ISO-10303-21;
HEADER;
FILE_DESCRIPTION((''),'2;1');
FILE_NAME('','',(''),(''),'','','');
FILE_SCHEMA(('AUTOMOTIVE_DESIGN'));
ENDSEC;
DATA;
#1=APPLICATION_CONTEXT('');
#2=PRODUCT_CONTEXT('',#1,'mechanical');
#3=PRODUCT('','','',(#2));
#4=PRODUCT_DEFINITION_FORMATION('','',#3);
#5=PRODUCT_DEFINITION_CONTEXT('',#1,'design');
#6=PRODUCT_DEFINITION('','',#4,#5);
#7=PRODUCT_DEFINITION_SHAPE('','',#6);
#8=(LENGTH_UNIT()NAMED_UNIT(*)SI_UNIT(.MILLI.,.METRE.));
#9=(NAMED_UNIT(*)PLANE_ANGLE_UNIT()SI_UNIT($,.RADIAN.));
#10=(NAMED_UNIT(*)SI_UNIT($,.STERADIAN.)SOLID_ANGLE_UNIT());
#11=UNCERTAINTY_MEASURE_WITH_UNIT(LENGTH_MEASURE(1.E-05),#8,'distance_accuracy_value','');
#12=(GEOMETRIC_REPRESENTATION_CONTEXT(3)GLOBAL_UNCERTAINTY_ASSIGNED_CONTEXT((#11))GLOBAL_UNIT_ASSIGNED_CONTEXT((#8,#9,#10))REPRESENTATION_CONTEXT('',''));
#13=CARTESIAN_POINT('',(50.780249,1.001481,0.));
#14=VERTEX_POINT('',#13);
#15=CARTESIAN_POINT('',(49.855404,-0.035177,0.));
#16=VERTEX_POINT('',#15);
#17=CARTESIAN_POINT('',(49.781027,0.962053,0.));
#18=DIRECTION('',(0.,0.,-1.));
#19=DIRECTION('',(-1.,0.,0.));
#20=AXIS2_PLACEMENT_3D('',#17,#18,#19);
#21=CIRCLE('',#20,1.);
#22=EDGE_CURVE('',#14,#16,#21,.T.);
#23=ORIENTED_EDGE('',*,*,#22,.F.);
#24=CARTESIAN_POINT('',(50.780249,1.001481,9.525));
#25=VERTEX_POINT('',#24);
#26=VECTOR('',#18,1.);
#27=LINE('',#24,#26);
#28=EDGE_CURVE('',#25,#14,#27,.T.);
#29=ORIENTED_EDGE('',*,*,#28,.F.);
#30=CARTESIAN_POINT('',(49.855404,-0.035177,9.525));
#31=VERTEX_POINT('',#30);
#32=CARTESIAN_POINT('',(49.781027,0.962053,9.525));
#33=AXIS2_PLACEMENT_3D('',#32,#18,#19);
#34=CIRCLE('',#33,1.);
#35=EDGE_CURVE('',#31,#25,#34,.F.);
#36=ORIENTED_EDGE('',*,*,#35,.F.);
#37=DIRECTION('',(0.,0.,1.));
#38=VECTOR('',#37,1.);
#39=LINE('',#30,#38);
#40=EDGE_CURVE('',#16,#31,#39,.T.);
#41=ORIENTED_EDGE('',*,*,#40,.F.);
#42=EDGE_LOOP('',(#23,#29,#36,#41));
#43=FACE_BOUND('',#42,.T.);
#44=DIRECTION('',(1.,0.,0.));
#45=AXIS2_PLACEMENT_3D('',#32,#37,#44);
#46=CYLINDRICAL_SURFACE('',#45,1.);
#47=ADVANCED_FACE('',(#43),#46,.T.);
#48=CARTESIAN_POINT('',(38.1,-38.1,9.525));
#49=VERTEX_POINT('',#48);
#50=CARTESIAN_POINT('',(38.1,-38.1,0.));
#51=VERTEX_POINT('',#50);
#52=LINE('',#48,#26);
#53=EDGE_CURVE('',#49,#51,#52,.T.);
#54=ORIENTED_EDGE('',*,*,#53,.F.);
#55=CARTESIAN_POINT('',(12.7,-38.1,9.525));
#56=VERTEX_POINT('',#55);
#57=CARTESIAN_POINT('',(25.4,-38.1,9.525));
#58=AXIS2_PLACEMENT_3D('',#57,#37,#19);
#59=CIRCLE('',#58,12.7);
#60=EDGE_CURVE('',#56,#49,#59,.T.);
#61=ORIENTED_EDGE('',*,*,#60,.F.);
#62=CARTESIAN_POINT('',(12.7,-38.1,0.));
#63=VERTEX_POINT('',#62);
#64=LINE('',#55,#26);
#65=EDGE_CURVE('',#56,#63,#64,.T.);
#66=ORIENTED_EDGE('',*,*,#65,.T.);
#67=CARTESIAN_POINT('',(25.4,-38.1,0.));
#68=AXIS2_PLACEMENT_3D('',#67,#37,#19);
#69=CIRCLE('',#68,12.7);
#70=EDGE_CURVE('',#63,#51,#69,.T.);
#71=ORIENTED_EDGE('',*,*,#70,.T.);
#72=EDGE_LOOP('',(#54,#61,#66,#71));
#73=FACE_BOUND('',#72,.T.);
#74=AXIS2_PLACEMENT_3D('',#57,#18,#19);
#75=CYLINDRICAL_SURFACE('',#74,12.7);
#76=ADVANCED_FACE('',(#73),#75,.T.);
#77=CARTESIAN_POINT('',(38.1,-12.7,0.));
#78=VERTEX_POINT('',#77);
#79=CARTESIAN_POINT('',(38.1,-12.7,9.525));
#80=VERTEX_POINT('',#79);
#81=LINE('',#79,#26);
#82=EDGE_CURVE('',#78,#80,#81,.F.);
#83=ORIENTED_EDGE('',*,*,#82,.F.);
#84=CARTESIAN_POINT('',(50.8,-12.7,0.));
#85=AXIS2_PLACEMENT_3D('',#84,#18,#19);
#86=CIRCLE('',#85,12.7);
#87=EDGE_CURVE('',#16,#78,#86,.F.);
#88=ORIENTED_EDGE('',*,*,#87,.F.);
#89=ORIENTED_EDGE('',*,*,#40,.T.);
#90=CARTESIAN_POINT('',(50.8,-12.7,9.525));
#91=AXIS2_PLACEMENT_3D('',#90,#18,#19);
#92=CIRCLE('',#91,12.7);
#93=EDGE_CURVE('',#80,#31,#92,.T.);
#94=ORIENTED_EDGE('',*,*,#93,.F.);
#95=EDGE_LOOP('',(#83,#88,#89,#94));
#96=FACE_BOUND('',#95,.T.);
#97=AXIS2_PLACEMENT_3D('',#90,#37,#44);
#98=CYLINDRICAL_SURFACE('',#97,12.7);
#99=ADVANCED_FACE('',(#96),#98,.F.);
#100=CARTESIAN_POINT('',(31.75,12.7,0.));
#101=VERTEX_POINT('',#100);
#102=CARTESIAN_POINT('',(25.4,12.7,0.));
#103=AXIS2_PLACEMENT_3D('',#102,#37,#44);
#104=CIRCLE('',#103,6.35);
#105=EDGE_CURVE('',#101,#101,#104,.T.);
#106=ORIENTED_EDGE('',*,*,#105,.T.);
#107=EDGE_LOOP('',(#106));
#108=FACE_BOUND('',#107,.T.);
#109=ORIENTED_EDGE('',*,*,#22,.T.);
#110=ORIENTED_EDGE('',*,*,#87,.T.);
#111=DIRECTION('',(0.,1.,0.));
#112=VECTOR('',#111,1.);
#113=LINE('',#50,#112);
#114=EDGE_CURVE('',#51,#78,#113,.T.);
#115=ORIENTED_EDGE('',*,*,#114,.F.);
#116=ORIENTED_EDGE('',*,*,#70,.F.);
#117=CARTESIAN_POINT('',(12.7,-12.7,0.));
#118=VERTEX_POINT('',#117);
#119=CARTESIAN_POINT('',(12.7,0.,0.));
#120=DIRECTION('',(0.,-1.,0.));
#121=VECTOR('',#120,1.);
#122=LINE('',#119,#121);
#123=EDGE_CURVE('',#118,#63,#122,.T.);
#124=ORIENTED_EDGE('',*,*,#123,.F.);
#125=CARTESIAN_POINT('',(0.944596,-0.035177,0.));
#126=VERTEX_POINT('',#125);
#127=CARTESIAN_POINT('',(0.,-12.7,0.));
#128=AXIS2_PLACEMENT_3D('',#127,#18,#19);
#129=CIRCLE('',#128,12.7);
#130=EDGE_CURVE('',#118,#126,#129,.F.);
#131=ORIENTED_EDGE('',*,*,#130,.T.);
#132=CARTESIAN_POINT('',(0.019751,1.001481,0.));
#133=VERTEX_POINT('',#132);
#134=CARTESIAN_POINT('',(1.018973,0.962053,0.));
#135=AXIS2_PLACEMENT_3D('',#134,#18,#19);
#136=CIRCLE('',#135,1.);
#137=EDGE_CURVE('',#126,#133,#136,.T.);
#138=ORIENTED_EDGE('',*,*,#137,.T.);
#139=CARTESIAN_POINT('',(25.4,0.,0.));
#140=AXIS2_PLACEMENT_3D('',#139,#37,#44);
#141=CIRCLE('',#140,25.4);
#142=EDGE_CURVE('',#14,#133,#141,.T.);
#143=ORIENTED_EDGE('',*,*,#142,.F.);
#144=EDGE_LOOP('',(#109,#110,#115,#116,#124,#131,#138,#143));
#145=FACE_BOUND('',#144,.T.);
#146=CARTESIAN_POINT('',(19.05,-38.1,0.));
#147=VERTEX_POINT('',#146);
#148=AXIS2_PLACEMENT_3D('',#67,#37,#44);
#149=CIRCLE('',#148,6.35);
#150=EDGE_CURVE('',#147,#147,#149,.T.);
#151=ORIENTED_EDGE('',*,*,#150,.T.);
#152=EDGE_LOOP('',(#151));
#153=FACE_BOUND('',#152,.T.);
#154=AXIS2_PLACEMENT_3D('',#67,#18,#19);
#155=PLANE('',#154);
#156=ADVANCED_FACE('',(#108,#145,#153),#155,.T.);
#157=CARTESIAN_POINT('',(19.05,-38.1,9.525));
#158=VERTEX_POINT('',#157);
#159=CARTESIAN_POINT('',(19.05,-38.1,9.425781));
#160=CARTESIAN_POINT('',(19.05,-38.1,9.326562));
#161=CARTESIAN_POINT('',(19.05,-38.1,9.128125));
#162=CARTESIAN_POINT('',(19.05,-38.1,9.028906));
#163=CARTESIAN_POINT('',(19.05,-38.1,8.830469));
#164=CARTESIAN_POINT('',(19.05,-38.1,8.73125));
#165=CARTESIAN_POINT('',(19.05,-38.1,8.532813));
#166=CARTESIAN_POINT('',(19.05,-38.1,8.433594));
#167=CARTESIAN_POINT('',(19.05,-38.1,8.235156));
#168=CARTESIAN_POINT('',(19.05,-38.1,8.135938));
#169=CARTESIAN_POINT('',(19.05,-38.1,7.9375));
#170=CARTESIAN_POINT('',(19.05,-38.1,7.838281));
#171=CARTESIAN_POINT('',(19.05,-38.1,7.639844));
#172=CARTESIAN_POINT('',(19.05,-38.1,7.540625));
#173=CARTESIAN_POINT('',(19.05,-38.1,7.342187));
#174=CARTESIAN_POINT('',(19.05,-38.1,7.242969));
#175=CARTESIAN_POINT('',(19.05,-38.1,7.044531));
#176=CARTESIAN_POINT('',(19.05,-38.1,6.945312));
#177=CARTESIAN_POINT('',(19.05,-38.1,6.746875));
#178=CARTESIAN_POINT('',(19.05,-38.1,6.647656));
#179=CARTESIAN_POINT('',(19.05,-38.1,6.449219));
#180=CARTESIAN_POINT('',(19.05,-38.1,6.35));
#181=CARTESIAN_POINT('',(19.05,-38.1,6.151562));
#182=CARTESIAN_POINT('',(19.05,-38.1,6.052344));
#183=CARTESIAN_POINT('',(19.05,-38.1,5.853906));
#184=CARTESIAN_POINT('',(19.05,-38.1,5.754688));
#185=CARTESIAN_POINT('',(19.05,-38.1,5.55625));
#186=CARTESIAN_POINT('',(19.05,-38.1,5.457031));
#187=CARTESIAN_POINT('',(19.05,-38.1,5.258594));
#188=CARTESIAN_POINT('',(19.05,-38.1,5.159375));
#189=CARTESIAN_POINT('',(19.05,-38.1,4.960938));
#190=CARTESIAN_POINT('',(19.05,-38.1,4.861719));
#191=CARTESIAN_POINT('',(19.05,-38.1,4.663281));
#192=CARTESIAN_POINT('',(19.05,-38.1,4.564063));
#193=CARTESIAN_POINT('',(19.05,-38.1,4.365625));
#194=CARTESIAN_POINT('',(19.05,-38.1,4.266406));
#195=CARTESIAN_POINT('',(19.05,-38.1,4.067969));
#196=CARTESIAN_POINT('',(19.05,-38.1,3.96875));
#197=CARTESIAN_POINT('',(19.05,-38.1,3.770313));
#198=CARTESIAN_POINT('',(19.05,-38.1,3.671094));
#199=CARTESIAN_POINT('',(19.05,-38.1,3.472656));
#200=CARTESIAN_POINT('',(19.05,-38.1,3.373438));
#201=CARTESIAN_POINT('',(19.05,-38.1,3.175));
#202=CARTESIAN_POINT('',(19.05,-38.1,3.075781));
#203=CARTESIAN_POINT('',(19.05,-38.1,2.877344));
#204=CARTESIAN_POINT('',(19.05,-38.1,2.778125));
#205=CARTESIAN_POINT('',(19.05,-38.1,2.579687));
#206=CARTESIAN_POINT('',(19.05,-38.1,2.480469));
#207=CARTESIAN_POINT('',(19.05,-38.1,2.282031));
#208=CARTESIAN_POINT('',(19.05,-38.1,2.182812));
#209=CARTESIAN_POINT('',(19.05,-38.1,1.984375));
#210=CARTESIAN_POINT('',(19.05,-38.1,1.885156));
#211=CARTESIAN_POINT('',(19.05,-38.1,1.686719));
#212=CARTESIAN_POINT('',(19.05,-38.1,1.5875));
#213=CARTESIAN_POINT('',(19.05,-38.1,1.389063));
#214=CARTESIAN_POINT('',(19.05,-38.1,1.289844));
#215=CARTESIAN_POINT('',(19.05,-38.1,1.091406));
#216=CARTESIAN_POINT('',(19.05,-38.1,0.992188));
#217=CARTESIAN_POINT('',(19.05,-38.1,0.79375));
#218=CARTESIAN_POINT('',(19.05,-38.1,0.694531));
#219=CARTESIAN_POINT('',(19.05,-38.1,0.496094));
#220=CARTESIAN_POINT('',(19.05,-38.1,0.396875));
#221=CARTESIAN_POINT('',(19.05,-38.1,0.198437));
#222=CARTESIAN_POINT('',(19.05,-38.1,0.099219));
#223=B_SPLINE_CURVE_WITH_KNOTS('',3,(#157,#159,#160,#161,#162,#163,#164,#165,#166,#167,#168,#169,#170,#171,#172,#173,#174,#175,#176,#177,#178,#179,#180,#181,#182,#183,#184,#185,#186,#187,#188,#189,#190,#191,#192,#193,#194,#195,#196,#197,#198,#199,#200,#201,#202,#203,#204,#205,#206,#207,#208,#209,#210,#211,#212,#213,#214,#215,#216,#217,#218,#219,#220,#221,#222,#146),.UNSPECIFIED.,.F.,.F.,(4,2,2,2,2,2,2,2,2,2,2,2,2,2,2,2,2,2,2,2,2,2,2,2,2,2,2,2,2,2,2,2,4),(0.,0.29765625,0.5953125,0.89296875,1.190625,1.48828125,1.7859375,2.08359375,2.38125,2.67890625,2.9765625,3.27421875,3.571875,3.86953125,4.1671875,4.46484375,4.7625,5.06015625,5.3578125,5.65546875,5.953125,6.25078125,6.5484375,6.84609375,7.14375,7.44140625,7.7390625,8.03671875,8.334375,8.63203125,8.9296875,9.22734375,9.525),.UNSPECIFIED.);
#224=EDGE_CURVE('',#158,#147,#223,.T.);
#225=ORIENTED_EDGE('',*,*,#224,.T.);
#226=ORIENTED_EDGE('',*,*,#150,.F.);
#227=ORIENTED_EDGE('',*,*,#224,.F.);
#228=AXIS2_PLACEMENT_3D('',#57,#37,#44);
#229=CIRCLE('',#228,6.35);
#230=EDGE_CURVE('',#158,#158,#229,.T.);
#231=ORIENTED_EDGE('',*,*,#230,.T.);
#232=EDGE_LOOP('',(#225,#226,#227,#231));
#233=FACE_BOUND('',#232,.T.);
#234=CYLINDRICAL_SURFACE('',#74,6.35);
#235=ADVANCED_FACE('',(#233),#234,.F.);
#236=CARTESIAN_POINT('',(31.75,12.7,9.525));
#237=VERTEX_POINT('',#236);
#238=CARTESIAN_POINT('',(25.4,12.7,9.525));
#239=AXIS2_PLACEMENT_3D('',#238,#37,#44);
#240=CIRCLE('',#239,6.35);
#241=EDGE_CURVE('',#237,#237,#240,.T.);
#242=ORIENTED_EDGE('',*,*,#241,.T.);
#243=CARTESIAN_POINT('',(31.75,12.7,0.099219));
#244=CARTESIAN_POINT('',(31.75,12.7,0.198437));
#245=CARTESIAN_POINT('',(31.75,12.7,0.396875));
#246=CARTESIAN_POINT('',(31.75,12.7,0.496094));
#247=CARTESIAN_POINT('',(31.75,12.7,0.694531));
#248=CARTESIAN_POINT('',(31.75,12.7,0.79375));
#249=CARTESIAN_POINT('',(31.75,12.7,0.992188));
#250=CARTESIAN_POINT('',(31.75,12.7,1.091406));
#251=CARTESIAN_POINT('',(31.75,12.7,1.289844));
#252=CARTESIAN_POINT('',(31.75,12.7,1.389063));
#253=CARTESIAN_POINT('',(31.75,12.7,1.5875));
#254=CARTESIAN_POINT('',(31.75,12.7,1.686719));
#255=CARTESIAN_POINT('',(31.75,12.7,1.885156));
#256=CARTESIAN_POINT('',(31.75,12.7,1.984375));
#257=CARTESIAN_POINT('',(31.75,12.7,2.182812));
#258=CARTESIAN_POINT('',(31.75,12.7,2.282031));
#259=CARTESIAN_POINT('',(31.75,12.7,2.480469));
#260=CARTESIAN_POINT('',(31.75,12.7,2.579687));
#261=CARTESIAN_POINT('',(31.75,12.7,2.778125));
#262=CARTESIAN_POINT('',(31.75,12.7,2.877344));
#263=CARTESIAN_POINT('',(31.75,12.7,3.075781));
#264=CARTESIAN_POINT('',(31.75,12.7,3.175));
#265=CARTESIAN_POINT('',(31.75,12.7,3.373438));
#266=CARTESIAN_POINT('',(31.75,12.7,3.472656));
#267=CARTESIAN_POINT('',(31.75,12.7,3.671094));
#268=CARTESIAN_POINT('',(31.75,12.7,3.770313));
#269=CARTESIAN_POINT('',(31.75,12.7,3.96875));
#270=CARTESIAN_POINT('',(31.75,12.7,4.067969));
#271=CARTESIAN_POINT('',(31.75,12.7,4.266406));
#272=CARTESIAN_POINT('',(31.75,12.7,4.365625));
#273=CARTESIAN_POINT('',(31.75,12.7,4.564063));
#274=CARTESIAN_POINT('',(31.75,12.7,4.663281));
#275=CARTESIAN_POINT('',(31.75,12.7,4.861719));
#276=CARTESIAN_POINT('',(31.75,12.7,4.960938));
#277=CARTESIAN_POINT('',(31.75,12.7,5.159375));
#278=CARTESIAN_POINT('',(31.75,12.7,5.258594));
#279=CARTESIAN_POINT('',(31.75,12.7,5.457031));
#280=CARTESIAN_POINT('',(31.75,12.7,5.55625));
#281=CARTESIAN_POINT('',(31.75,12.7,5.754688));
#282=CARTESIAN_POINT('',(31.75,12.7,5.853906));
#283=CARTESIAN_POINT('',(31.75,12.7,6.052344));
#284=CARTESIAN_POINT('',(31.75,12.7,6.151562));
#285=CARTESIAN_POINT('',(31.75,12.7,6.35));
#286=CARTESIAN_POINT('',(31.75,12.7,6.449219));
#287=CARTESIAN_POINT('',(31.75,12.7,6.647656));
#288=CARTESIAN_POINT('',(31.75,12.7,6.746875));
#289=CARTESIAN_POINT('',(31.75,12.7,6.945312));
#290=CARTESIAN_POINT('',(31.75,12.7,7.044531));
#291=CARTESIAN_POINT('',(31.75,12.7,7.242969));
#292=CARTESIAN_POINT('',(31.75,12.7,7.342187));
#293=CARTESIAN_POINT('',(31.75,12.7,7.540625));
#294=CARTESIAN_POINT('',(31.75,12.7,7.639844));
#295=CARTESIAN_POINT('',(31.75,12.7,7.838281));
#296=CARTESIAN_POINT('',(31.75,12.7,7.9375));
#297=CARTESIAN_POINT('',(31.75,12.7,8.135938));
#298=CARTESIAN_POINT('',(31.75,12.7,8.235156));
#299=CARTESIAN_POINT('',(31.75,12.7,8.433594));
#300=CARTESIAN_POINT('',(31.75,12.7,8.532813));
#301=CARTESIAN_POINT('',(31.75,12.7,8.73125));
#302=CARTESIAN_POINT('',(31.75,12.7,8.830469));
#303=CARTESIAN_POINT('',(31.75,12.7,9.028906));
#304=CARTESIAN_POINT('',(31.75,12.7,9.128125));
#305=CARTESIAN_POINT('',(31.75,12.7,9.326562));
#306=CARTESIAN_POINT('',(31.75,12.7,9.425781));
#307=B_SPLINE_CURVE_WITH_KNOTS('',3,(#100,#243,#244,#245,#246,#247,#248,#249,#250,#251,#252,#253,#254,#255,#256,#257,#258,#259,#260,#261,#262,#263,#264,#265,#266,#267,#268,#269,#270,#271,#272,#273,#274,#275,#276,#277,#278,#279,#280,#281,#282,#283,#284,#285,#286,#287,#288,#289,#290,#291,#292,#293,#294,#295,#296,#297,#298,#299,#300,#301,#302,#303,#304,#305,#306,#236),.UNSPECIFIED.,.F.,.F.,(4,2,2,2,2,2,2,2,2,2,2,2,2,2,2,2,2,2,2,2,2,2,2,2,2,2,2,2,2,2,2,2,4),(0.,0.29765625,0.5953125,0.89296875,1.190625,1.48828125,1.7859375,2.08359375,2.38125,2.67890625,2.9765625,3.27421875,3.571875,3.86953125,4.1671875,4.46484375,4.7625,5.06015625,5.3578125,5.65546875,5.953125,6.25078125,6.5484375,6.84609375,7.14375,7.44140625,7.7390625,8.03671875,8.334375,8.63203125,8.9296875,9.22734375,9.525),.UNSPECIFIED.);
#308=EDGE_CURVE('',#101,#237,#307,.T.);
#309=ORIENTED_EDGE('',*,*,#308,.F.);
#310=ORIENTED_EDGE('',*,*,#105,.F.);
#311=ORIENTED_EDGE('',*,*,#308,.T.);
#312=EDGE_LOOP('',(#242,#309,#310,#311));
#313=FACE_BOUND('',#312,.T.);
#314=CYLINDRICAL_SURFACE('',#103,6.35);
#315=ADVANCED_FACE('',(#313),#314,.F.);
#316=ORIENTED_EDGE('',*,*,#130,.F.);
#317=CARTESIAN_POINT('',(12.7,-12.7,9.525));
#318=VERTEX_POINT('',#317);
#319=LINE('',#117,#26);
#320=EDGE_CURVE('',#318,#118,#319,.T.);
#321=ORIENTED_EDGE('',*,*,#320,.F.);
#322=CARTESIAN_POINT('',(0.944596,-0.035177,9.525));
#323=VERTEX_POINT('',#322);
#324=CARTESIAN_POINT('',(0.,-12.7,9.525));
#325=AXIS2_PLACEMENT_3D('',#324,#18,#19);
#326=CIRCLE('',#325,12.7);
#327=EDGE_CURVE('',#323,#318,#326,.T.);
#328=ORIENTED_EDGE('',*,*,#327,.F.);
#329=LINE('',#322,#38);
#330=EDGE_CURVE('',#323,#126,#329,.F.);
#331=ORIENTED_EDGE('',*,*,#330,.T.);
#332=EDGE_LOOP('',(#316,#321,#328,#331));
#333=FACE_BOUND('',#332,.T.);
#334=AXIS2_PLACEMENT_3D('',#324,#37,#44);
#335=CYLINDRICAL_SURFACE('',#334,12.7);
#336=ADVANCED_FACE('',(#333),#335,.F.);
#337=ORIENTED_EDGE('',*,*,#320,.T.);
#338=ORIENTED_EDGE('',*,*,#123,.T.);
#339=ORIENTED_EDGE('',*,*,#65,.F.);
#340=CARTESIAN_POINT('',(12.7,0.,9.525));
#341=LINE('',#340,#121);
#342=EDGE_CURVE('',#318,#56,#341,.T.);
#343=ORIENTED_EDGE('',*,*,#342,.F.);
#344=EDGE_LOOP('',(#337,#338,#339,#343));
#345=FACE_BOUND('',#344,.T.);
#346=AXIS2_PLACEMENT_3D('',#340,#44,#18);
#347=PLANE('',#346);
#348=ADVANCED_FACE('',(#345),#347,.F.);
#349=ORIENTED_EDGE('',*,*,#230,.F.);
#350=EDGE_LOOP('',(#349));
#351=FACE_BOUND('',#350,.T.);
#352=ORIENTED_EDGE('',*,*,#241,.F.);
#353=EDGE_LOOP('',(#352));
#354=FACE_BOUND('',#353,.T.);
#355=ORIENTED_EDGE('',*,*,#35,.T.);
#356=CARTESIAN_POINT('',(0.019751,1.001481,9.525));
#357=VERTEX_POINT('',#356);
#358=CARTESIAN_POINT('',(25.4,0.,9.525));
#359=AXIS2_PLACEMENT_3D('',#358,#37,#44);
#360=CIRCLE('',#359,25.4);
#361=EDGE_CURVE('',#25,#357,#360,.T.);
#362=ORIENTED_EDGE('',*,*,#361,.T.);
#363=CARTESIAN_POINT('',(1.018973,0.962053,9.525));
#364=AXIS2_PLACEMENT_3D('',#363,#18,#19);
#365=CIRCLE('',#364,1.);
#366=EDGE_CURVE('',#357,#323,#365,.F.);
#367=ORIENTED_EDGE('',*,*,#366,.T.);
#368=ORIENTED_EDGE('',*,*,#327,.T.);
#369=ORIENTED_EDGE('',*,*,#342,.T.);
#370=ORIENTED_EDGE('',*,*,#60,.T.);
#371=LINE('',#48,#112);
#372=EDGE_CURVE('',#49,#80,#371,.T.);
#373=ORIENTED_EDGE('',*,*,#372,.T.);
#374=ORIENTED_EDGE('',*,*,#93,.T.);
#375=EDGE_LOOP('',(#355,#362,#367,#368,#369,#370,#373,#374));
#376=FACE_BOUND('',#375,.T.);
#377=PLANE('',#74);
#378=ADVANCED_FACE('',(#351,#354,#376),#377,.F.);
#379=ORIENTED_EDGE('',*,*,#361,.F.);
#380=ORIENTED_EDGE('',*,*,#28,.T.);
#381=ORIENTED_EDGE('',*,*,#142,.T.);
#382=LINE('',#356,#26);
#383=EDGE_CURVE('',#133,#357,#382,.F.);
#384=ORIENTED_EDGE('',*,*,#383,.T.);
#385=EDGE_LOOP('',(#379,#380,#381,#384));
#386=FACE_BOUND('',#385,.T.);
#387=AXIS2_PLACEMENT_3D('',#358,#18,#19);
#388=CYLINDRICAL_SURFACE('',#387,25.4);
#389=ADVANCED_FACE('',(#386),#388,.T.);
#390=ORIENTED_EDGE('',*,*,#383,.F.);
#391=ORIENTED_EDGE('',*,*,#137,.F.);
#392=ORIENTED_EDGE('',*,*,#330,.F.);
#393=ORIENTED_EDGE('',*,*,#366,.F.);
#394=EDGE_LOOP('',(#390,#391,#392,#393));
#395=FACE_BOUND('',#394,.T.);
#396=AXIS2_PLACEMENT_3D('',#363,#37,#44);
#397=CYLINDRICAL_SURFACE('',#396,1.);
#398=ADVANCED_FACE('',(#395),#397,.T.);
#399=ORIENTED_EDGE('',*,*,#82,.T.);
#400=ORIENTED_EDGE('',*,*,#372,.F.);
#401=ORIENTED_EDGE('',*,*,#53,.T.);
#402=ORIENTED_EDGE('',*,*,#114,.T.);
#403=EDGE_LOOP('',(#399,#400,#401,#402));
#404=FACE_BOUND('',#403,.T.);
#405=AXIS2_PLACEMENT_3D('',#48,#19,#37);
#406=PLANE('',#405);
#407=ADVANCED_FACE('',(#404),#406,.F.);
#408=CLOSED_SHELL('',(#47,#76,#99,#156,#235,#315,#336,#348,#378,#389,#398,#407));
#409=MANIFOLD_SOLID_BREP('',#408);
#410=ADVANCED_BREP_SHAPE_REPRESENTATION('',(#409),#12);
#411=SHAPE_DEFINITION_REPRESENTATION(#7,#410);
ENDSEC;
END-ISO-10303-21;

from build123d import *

# Parameters (mm, degrees)
SKETCH1_R           = 6.35
BOSS_EXTRUDE1_DEPTH = 9.525
SKETCH2_R           = 6.35
CUT_EXTRUDE1_DEPTH  = 73.470722537
FILLET1_R           = 12.7
FILLET2_R           = 1


with BuildPart() as part:
    # Sketch1 → Boss-Extrude1 (new body)
    with BuildSketch(Plane.XY):
        with BuildLine():
            Line((0, 0), (12.7, 0))
            Line((12.7, 0), (12.7, -38.1))
            ThreePointArc((12.7, -38.1), (25.4, -50.8), (38.1, -38.1))
            Line((38.1, -38.1), (38.1, 0))
            Line((38.1, 0), (50.8, 0))
            ThreePointArc((50.8, 0), (25.4, 25.4), (0, 0))
        make_face()
        with Locations(Location((25.4, -38.1, 0), (0, 0, 180))):
            Circle(SKETCH1_R, mode=Mode.SUBTRACT)
    extrude(amount=BOSS_EXTRUDE1_DEPTH)

    # Sketch2 → Cut-Extrude1 (cut, through all)
    with BuildSketch(Plane.XY.offset(9.525)):
        with Locations((25.4, 12.7)):
            Circle(SKETCH2_R)
    extrude(amount=-CUT_EXTRUDE1_DEPTH, mode=Mode.SUBTRACT)

    # Fillet1
    fillet1_edges = [part.edges().sort_by_distance(p)[0] for p in [
        (38.1, 0, 4.7625),
        (12.7, 0, 4.7625),
    ]]
    fillet(fillet1_edges, radius=FILLET1_R - 0.0001)  # a hair under: the kernel refuses the full size

    # Fillet2
    fillet2_edges = [part.edges().sort_by_distance(p)[0] for p in [
        (0, 0, 4.7625),
        (50.8, 0, 4.7625),
    ]]
    fillet(fillet2_edges, radius=FILLET2_R)


solid = part.part
